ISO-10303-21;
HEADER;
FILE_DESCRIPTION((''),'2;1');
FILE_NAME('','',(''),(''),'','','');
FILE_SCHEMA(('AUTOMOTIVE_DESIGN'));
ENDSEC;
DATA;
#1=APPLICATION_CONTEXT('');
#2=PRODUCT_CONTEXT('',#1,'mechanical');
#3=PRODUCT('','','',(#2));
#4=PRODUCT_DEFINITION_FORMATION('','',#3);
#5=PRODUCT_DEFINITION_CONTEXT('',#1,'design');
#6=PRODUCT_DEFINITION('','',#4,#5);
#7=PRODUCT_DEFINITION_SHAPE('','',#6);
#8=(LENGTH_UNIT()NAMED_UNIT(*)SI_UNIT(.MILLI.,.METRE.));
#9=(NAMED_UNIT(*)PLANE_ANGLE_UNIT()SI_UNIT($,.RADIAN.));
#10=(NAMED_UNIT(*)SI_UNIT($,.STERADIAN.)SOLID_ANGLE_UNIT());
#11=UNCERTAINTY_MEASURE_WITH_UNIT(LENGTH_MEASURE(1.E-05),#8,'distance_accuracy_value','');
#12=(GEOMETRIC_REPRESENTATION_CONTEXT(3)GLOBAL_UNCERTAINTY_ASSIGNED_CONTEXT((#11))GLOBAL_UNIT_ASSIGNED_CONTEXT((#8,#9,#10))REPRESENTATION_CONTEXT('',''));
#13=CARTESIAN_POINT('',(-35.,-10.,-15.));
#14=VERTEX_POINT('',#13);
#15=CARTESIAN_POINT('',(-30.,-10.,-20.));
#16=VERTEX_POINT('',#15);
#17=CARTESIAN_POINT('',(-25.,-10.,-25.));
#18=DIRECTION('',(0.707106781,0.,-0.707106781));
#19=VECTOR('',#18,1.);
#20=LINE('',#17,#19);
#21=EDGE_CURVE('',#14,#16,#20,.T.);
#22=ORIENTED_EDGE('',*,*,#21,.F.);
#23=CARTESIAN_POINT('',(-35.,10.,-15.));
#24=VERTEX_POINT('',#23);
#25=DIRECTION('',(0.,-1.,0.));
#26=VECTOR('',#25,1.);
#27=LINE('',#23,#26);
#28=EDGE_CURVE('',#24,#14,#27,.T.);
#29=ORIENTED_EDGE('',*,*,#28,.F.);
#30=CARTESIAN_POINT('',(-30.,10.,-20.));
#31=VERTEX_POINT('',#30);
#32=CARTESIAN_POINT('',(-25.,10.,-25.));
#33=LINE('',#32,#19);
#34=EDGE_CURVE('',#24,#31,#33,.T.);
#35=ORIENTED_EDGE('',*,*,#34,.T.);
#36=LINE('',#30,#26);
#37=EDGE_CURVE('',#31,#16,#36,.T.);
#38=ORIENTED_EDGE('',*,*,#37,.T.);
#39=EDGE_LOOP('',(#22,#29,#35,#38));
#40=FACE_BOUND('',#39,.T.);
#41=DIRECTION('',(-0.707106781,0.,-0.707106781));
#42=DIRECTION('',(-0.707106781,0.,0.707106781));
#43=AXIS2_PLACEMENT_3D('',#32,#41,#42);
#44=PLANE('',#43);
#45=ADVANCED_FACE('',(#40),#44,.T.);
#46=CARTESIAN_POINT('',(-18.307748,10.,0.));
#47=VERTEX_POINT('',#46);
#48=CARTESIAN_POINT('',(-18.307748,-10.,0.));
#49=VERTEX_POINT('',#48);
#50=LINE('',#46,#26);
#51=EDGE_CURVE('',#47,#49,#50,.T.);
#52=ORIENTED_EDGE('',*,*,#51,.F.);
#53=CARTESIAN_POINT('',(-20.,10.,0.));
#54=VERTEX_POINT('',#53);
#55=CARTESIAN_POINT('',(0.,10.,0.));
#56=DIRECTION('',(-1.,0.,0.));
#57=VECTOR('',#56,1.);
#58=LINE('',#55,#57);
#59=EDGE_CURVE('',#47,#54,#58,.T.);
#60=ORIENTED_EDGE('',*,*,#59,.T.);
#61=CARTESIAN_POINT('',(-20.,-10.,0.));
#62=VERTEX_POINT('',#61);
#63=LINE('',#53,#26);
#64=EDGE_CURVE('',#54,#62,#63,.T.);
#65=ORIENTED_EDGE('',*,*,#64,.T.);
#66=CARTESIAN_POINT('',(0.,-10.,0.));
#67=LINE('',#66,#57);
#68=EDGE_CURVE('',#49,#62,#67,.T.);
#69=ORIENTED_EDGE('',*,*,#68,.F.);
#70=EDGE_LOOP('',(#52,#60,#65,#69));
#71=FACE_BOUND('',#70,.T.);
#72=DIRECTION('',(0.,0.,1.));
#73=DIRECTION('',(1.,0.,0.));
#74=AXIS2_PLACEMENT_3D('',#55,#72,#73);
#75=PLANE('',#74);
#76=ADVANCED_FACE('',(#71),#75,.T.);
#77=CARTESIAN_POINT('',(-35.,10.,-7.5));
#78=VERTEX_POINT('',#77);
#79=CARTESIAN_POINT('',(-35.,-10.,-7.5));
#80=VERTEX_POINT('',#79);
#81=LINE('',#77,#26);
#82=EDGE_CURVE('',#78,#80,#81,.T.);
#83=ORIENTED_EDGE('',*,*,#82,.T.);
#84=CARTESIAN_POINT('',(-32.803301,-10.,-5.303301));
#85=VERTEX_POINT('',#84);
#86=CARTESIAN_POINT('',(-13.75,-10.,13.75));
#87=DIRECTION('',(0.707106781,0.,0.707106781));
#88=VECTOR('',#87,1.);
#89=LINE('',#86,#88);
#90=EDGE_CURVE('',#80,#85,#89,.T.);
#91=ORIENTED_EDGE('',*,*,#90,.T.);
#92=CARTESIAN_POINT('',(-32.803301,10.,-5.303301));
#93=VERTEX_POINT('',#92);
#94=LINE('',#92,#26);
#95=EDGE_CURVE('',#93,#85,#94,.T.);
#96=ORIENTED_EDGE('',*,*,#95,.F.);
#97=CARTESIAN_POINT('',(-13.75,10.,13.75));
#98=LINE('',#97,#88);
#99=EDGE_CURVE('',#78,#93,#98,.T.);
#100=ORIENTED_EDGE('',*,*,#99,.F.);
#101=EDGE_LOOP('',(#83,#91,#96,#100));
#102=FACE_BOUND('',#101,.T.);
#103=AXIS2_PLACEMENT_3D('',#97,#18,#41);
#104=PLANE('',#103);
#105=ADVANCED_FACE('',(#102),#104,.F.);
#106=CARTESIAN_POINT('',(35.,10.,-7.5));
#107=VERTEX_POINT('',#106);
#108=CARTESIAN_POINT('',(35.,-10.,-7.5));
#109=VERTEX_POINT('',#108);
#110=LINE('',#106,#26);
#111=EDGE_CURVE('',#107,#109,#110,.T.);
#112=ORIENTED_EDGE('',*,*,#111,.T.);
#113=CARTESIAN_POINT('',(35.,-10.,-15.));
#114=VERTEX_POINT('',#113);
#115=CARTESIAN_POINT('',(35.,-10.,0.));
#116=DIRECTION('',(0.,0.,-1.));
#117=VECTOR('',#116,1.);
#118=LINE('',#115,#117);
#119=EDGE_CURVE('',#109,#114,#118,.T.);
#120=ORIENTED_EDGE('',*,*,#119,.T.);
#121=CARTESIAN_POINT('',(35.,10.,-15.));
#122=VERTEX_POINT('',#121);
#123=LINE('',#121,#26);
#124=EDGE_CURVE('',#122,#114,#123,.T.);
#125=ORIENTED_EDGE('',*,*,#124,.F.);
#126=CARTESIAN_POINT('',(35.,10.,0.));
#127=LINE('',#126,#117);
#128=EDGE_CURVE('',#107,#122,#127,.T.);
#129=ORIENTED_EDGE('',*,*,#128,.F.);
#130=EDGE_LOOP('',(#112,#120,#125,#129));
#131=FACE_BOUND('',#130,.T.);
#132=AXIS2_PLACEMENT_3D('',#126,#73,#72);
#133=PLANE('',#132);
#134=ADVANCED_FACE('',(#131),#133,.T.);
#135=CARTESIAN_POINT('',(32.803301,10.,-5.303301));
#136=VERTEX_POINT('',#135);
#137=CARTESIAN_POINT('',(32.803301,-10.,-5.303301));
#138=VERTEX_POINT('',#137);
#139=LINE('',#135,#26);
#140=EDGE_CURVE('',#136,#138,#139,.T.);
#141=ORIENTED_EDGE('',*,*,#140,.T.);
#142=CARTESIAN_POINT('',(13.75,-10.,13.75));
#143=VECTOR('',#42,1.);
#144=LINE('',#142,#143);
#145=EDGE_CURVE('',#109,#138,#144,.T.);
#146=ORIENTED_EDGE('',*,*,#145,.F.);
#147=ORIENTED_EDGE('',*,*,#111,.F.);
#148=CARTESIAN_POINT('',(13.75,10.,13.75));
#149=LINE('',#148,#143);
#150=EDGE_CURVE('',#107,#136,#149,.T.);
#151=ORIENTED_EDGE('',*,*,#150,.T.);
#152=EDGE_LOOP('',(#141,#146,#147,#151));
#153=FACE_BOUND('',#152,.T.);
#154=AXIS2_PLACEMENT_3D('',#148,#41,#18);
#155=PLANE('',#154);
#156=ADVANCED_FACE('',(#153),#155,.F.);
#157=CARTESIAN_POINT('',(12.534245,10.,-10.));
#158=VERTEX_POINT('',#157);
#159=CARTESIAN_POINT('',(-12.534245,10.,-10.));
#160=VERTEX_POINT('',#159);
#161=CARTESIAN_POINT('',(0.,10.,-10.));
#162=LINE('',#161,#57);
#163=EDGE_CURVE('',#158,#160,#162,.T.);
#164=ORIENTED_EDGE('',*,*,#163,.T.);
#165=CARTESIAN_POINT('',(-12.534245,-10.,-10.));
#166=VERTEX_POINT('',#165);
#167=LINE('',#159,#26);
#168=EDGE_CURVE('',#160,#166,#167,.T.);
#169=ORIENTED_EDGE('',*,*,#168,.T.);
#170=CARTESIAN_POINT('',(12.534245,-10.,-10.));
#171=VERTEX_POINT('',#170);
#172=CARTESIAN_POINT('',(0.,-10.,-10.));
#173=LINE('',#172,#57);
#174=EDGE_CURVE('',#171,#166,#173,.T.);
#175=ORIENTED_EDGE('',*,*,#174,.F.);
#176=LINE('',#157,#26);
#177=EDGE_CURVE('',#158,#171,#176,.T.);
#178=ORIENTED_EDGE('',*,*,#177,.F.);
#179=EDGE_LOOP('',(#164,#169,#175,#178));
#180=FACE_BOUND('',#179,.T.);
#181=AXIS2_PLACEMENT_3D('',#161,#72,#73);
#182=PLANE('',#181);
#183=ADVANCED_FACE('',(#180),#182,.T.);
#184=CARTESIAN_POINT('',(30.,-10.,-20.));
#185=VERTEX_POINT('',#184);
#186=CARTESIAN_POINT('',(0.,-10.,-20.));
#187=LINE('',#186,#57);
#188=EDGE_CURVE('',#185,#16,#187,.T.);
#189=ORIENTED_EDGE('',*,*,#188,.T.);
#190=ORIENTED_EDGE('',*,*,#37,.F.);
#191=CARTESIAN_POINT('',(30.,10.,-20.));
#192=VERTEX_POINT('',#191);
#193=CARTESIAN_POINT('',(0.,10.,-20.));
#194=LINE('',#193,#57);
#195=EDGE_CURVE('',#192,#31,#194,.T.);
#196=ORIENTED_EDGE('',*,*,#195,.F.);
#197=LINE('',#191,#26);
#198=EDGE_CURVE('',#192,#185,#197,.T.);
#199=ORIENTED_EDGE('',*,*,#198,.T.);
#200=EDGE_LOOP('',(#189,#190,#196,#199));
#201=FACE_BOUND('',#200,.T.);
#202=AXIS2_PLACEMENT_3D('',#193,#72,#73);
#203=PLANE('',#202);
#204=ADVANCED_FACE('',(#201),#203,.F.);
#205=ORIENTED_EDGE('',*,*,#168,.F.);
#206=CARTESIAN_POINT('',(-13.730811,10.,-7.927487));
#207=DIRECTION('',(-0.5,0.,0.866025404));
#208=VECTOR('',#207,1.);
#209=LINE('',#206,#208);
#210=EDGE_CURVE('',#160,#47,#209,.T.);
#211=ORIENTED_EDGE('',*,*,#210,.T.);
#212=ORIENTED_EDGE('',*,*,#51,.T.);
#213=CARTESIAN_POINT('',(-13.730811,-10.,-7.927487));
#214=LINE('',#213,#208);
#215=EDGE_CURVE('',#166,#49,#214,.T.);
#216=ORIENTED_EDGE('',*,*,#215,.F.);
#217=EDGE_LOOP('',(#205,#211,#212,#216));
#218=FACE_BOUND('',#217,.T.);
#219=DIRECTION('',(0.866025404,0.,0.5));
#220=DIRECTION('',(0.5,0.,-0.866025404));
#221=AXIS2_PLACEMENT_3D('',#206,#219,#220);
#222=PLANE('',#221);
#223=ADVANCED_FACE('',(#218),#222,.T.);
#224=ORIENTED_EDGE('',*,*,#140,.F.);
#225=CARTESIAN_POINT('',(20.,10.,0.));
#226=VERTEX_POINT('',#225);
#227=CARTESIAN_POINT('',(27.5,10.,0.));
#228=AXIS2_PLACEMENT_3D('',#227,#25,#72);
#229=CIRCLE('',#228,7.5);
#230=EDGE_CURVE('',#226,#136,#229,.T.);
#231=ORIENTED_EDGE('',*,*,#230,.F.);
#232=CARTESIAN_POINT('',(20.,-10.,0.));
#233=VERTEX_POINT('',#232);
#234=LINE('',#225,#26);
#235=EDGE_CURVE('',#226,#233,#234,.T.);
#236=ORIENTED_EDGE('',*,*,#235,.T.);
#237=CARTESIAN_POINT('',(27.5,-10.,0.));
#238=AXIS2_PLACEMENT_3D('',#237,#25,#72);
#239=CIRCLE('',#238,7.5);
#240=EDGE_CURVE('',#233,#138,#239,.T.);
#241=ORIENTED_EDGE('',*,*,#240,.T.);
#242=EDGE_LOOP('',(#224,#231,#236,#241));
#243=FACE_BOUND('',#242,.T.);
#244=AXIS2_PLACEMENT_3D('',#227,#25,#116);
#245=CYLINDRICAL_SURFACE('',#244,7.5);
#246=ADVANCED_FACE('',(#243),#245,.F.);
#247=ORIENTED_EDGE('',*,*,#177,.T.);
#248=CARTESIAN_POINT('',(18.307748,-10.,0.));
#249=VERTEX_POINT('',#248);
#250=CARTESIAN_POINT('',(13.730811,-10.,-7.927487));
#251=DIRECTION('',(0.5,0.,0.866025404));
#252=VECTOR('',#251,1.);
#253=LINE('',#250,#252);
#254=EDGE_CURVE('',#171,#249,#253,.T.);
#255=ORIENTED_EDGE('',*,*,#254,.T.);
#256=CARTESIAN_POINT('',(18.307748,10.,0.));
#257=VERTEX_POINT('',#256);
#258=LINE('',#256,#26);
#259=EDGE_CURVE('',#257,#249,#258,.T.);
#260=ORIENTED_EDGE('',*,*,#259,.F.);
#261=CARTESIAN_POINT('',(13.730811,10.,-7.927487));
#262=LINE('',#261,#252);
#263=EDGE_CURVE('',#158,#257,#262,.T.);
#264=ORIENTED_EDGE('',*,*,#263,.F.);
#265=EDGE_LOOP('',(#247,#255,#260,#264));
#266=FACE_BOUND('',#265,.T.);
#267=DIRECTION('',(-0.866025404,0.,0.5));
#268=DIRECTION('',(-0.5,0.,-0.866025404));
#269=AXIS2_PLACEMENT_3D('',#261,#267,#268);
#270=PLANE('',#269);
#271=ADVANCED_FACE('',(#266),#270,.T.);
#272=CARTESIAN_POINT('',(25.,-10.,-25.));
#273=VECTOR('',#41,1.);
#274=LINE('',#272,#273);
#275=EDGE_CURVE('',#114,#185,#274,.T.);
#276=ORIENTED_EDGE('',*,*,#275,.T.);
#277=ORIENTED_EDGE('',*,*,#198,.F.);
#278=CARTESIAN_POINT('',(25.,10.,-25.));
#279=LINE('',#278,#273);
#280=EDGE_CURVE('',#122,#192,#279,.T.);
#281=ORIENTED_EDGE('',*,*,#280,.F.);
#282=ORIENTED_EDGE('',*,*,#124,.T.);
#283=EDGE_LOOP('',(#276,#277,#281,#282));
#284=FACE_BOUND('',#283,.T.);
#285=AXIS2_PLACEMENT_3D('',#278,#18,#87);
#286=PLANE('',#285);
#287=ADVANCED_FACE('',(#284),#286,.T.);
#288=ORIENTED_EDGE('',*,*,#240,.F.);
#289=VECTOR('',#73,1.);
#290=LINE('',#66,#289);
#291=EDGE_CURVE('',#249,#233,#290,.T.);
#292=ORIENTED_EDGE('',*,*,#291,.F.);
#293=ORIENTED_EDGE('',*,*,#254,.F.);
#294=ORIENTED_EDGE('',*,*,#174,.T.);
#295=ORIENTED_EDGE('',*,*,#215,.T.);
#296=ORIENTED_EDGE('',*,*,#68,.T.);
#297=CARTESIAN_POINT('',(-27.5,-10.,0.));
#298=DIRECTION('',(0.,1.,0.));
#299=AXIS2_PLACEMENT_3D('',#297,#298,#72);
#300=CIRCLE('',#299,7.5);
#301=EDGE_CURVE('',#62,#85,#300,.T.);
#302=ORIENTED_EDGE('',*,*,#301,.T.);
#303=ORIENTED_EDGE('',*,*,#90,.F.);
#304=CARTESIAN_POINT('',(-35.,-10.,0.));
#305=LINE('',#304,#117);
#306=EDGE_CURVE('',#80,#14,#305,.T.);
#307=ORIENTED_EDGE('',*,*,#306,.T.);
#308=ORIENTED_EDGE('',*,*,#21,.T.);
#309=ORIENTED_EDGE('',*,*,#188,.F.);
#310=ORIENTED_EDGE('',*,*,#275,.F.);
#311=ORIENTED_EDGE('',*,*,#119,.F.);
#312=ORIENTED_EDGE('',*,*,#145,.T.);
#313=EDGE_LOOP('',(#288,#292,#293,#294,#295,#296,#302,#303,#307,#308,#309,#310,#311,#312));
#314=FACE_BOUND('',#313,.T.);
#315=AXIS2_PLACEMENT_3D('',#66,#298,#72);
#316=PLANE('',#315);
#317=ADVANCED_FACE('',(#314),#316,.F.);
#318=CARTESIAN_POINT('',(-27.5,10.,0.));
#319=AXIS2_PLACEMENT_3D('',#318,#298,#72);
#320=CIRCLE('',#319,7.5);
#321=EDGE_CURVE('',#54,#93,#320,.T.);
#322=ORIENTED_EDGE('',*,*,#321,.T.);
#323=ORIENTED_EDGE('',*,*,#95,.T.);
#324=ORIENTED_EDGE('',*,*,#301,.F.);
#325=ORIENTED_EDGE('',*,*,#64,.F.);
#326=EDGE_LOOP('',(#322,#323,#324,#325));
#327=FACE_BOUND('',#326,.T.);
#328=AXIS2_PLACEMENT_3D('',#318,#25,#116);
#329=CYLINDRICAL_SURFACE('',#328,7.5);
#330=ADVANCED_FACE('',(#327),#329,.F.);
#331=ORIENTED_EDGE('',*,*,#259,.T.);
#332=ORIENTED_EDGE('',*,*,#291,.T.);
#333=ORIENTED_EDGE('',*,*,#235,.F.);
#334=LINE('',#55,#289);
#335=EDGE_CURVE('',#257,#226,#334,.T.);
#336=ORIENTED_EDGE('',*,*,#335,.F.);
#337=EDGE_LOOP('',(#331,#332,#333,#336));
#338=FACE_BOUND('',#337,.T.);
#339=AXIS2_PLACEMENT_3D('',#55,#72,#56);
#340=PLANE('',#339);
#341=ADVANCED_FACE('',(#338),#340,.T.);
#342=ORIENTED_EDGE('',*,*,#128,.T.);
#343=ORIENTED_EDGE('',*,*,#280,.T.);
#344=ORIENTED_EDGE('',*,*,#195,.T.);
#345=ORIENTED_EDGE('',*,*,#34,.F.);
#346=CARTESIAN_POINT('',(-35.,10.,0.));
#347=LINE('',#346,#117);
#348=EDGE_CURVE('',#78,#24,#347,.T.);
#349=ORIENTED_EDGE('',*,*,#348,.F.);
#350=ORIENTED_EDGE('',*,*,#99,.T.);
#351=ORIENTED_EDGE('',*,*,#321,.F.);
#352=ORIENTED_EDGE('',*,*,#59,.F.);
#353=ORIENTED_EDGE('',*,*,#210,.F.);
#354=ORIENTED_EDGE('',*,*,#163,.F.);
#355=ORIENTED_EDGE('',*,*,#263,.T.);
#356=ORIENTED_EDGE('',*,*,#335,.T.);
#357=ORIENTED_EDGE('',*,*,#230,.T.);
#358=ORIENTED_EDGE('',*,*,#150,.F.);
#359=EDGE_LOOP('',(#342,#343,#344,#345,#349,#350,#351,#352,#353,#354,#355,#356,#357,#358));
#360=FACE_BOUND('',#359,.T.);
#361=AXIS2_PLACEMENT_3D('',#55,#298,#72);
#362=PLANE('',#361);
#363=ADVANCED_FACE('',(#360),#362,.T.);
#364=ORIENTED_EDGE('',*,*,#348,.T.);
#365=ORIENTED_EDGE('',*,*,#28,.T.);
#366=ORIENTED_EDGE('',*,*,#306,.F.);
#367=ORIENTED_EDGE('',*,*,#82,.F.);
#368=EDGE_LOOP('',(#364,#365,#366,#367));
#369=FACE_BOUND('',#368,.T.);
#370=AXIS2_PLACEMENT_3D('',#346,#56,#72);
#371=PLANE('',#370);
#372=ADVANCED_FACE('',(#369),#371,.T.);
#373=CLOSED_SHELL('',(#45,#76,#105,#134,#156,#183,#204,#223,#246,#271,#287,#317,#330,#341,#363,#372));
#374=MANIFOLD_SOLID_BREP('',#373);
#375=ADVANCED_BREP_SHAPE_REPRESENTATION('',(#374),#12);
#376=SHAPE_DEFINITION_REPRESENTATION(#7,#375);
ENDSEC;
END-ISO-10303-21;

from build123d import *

# Parameters (mm, degrees)
BOSS_EXTRUDE1_START = -10
BOSS_EXTRUDE1_DEPTH = 20


# Read off the part's stored shape, not the designer's step: Boss-Extrude1
with BuildPart() as part:
    # Boss-Extrude1 outline → Boss-Extrude1 (new body)
    with BuildSketch(Plane(origin=(0, 0, 0), x_dir=(1, 0, 0), z_dir=(0, 1, 0)).offset(BOSS_EXTRUDE1_START)):
        with BuildLine():
            Line((-12.534244987, 10), (0, 10))
            Line((0, 10), (0, 20))
            Line((0, 20), (-30, 20))
            Line((-30, 20), (-35, 15))
            Line((-35, 15), (-35, 7.5))
            Line((-35, 7.5), (-32.803300859, 5.303300859))
            ThreePointArc((-32.803300859, 5.303300859), (-24.629874257, 6.929096494), (-20, 0))
            Line((-20, 0), (-18.307747679, 0))
            Line((-18.307747679, 0), (-12.534244987, 10))
        make_face()
    extrude(amount=BOSS_EXTRUDE1_DEPTH)

    # Mirror2: part across plane


with BuildPart() as part_1:
    add(part.part)
    add(part.part.mirror(Plane(origin=(0, 0, 0), x_dir=(0, 0, 1), z_dir=(1, 0, 0))))


solid = part_1.part
